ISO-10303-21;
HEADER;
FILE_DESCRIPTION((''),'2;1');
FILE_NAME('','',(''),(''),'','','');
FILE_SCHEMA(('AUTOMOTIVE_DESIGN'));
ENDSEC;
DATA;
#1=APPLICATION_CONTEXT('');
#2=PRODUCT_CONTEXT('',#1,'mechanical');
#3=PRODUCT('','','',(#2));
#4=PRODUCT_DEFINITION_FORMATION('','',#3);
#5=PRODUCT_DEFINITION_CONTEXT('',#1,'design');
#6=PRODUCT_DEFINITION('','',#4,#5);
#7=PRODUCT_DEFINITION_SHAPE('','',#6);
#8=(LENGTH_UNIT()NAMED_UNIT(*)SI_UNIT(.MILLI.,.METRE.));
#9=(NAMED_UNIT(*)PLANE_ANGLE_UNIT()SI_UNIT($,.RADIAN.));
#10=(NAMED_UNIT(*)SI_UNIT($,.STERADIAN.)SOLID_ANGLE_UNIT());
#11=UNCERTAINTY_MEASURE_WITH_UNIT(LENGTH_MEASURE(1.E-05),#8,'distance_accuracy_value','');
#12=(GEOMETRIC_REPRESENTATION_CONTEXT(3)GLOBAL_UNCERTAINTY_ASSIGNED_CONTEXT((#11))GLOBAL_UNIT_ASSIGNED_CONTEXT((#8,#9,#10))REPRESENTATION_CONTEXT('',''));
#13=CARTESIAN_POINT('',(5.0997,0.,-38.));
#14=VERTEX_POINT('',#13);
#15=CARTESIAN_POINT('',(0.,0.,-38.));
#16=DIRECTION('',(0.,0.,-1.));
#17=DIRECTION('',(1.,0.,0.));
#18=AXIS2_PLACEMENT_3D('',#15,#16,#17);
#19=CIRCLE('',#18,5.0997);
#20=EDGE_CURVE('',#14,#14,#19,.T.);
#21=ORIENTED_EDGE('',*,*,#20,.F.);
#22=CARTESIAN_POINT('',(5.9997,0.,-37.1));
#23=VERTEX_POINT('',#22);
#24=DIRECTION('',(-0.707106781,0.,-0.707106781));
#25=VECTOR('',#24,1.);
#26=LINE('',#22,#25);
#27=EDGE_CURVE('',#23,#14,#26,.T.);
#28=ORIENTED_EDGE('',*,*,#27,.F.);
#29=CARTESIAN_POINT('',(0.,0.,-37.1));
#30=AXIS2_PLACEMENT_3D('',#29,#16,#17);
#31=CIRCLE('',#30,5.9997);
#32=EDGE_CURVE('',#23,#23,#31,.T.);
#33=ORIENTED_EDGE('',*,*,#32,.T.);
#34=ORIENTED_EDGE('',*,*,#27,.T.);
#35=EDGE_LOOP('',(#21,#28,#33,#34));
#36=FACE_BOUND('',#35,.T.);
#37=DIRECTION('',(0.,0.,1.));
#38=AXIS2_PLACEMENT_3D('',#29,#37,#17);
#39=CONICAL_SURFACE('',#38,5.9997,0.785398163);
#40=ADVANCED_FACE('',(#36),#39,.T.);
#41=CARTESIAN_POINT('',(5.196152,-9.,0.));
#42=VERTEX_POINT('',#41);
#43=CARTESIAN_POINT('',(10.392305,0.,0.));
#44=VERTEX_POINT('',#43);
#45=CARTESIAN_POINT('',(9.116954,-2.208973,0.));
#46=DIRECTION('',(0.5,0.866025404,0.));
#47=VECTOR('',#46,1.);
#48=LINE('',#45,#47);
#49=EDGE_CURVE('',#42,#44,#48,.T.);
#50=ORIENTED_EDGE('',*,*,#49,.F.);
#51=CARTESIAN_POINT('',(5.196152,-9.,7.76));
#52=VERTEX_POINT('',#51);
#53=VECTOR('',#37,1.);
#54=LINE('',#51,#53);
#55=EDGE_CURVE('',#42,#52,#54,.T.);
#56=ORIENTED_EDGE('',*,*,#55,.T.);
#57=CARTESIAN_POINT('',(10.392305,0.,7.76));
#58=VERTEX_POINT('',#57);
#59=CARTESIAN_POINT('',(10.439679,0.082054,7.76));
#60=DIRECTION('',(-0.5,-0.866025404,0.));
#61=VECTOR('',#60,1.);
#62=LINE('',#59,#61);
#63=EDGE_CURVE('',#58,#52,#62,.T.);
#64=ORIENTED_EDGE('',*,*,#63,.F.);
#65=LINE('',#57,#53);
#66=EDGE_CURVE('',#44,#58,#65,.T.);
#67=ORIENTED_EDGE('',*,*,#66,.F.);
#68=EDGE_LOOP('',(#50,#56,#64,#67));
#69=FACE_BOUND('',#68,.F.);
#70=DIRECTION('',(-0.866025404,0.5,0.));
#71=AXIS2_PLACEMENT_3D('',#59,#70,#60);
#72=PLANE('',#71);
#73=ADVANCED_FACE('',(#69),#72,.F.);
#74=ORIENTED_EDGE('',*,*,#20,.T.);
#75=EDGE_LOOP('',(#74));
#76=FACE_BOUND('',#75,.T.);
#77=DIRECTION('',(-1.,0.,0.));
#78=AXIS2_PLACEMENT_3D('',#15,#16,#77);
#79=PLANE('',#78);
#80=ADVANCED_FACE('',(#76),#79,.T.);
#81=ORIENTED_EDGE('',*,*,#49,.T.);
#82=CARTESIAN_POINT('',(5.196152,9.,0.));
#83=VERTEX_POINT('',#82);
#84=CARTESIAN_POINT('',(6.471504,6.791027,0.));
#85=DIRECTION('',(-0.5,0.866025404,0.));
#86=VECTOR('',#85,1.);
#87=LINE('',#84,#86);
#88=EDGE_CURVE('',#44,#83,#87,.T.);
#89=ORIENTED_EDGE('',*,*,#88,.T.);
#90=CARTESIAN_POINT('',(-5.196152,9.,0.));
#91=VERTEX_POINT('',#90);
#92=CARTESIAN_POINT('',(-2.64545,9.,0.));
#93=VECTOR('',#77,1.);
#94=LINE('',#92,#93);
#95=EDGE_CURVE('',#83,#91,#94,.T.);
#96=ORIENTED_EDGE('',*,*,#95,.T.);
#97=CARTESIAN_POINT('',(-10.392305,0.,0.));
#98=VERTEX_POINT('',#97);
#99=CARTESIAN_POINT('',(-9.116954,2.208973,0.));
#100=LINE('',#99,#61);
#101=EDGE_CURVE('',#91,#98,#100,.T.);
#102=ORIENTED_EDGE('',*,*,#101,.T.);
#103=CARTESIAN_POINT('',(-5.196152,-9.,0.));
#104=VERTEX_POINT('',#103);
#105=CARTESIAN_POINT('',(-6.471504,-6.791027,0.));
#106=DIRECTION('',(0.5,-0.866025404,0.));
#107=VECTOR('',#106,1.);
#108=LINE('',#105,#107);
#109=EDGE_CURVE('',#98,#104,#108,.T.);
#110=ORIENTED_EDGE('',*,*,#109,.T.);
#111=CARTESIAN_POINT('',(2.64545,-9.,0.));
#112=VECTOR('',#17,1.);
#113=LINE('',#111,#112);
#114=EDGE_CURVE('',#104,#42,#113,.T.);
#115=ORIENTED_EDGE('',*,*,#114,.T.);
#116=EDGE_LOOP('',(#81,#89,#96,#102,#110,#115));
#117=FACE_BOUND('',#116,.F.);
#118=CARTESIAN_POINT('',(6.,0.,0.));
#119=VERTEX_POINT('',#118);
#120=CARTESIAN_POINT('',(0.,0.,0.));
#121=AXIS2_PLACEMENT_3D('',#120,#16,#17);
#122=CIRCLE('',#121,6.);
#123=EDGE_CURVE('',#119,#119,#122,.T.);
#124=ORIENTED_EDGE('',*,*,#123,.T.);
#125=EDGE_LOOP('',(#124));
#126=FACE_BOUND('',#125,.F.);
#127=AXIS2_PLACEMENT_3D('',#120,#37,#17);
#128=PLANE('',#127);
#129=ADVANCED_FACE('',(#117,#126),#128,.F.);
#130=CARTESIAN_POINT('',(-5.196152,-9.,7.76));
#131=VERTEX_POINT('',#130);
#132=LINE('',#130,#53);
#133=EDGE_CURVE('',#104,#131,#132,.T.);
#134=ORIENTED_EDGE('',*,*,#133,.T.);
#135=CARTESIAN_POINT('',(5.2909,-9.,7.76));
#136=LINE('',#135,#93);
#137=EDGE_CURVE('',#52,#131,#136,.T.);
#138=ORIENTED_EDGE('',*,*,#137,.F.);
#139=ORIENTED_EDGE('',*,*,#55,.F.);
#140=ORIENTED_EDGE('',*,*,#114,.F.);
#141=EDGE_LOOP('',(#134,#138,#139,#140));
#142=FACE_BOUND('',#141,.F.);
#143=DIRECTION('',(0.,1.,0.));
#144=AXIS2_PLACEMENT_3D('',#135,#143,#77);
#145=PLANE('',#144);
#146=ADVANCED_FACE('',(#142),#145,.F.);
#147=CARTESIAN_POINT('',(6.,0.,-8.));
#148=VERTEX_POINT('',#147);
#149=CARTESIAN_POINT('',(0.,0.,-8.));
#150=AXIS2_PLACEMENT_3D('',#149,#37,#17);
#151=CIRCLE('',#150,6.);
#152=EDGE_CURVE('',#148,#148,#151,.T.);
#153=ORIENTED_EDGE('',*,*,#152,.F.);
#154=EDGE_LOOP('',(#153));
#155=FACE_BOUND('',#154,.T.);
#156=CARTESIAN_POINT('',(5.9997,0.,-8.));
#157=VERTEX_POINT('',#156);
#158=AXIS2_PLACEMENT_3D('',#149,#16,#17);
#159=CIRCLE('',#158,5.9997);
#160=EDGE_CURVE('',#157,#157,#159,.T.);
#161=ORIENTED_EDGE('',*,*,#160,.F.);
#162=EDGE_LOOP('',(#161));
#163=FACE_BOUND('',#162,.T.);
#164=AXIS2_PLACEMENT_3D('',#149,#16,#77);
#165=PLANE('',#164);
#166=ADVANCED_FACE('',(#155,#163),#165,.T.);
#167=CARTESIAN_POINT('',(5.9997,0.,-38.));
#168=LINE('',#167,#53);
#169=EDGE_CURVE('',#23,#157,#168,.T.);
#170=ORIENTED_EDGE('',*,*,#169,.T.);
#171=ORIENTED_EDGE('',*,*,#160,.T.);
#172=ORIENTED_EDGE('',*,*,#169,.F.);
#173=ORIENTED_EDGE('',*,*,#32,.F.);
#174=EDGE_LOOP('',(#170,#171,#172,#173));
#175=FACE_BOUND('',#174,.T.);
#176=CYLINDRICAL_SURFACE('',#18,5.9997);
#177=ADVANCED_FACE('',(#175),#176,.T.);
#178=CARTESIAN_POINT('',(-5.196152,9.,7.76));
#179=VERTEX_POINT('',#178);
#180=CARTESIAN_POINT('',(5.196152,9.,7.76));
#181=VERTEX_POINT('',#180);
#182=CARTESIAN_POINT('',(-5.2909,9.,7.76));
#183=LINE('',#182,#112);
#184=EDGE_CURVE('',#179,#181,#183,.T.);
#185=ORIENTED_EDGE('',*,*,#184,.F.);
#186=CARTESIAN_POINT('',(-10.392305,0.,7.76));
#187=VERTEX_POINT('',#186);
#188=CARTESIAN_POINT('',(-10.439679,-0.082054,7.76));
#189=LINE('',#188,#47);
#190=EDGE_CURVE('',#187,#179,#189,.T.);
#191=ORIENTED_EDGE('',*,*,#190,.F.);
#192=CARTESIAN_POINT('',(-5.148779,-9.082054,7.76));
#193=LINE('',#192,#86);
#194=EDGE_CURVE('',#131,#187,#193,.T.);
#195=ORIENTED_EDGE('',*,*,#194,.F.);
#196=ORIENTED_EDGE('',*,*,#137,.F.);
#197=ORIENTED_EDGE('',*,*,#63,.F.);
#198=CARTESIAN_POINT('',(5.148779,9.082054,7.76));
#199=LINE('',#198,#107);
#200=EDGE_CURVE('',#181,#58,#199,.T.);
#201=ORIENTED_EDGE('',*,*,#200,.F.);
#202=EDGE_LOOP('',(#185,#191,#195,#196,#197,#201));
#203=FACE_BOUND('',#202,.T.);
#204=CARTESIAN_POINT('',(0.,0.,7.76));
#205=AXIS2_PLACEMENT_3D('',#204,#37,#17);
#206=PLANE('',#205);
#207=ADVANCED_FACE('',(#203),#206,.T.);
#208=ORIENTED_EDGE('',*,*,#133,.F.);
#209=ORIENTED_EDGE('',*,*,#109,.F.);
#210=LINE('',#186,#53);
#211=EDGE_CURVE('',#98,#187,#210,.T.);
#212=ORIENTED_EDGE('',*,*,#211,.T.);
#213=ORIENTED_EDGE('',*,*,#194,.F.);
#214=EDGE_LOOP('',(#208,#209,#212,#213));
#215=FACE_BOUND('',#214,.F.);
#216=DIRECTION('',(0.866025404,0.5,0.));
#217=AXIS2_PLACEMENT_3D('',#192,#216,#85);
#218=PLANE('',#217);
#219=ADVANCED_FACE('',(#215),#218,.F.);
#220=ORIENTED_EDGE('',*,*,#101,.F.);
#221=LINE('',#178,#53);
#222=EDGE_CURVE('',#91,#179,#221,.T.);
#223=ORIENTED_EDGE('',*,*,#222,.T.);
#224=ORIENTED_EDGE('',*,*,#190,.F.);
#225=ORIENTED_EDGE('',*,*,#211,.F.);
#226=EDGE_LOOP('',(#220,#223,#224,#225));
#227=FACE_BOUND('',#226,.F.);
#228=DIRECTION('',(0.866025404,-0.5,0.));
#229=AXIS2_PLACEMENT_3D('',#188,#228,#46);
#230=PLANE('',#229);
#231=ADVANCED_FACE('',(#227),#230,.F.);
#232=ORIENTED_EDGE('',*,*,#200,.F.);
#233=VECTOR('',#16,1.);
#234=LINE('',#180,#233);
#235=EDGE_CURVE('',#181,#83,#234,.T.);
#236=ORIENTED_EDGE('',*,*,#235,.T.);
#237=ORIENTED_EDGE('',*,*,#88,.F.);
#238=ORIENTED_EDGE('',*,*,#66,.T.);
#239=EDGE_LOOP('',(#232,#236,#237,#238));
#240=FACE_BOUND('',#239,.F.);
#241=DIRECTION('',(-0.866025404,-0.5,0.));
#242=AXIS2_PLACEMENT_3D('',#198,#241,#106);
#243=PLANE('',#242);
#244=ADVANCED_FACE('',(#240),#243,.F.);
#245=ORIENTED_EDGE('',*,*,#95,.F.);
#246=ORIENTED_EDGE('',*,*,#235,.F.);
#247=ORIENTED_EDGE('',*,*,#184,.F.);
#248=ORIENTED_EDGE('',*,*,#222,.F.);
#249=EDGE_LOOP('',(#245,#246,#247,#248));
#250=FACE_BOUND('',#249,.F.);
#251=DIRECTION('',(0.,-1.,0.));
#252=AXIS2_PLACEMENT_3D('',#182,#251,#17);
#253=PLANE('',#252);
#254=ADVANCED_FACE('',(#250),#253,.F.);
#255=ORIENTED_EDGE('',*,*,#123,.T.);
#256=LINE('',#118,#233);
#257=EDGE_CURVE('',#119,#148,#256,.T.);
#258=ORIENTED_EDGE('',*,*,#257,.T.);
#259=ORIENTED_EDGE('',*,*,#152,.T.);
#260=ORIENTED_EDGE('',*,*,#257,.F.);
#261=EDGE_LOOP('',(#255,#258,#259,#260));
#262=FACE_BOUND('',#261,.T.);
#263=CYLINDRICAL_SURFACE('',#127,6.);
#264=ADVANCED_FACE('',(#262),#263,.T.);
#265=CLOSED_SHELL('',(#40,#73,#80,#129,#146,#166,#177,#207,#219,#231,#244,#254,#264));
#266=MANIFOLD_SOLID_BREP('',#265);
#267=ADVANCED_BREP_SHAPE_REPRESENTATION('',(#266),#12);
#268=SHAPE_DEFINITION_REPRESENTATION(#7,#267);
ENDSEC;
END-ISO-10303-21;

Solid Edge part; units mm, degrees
sketch "Sketch1" plane through (0, 0, 0) normal (0, 0, 1) x (1, 0, 0)
  circle A0 centre (0, 0) radius 10.44
  dimension "D1" = 20.88
extrude "Protrusion1" add sketch "Sketch1" along normal blind 7.76
sketch "Sketch2" plane through (0, 0, 0) normal (0, 0, -1) x (1, 0, 0)
  circle A0 centre (0, 0) radius 6
extrude "Protrusion2" add sketch "Sketch2" along normal blind 38
sketch "Sketch3" plane through (0, 0, -38) normal (0, 0, -1) x (1, 0, 0)
  circle A0 centre (0, 0) radius 5.9997
extrude "Cutout1" cut sketch "Sketch3" against normal blind 30 flip side to cut
chamfer "Chamfer_1" distance 0.9 angle 45 1 edges at (-5.9997, 0, -38)
sketch "Sketch4" plane through (0, 0, 7.76) normal (0, 0, 1) x (1, 0, 0)
  line L0 (-5.2909, 9) -> (5.2909, 9)
  dimension "D1" = 18
extrude "Cutout2" cut sketch "Sketch4" against normal up to next material side at (0, 9.05, 7.76)
pattern_circular "Pattern1" count 6 over 360 about axis through (0, 0, 7.76) along (0, 0, 1) of "Cutout2"
properties part number "112927"
